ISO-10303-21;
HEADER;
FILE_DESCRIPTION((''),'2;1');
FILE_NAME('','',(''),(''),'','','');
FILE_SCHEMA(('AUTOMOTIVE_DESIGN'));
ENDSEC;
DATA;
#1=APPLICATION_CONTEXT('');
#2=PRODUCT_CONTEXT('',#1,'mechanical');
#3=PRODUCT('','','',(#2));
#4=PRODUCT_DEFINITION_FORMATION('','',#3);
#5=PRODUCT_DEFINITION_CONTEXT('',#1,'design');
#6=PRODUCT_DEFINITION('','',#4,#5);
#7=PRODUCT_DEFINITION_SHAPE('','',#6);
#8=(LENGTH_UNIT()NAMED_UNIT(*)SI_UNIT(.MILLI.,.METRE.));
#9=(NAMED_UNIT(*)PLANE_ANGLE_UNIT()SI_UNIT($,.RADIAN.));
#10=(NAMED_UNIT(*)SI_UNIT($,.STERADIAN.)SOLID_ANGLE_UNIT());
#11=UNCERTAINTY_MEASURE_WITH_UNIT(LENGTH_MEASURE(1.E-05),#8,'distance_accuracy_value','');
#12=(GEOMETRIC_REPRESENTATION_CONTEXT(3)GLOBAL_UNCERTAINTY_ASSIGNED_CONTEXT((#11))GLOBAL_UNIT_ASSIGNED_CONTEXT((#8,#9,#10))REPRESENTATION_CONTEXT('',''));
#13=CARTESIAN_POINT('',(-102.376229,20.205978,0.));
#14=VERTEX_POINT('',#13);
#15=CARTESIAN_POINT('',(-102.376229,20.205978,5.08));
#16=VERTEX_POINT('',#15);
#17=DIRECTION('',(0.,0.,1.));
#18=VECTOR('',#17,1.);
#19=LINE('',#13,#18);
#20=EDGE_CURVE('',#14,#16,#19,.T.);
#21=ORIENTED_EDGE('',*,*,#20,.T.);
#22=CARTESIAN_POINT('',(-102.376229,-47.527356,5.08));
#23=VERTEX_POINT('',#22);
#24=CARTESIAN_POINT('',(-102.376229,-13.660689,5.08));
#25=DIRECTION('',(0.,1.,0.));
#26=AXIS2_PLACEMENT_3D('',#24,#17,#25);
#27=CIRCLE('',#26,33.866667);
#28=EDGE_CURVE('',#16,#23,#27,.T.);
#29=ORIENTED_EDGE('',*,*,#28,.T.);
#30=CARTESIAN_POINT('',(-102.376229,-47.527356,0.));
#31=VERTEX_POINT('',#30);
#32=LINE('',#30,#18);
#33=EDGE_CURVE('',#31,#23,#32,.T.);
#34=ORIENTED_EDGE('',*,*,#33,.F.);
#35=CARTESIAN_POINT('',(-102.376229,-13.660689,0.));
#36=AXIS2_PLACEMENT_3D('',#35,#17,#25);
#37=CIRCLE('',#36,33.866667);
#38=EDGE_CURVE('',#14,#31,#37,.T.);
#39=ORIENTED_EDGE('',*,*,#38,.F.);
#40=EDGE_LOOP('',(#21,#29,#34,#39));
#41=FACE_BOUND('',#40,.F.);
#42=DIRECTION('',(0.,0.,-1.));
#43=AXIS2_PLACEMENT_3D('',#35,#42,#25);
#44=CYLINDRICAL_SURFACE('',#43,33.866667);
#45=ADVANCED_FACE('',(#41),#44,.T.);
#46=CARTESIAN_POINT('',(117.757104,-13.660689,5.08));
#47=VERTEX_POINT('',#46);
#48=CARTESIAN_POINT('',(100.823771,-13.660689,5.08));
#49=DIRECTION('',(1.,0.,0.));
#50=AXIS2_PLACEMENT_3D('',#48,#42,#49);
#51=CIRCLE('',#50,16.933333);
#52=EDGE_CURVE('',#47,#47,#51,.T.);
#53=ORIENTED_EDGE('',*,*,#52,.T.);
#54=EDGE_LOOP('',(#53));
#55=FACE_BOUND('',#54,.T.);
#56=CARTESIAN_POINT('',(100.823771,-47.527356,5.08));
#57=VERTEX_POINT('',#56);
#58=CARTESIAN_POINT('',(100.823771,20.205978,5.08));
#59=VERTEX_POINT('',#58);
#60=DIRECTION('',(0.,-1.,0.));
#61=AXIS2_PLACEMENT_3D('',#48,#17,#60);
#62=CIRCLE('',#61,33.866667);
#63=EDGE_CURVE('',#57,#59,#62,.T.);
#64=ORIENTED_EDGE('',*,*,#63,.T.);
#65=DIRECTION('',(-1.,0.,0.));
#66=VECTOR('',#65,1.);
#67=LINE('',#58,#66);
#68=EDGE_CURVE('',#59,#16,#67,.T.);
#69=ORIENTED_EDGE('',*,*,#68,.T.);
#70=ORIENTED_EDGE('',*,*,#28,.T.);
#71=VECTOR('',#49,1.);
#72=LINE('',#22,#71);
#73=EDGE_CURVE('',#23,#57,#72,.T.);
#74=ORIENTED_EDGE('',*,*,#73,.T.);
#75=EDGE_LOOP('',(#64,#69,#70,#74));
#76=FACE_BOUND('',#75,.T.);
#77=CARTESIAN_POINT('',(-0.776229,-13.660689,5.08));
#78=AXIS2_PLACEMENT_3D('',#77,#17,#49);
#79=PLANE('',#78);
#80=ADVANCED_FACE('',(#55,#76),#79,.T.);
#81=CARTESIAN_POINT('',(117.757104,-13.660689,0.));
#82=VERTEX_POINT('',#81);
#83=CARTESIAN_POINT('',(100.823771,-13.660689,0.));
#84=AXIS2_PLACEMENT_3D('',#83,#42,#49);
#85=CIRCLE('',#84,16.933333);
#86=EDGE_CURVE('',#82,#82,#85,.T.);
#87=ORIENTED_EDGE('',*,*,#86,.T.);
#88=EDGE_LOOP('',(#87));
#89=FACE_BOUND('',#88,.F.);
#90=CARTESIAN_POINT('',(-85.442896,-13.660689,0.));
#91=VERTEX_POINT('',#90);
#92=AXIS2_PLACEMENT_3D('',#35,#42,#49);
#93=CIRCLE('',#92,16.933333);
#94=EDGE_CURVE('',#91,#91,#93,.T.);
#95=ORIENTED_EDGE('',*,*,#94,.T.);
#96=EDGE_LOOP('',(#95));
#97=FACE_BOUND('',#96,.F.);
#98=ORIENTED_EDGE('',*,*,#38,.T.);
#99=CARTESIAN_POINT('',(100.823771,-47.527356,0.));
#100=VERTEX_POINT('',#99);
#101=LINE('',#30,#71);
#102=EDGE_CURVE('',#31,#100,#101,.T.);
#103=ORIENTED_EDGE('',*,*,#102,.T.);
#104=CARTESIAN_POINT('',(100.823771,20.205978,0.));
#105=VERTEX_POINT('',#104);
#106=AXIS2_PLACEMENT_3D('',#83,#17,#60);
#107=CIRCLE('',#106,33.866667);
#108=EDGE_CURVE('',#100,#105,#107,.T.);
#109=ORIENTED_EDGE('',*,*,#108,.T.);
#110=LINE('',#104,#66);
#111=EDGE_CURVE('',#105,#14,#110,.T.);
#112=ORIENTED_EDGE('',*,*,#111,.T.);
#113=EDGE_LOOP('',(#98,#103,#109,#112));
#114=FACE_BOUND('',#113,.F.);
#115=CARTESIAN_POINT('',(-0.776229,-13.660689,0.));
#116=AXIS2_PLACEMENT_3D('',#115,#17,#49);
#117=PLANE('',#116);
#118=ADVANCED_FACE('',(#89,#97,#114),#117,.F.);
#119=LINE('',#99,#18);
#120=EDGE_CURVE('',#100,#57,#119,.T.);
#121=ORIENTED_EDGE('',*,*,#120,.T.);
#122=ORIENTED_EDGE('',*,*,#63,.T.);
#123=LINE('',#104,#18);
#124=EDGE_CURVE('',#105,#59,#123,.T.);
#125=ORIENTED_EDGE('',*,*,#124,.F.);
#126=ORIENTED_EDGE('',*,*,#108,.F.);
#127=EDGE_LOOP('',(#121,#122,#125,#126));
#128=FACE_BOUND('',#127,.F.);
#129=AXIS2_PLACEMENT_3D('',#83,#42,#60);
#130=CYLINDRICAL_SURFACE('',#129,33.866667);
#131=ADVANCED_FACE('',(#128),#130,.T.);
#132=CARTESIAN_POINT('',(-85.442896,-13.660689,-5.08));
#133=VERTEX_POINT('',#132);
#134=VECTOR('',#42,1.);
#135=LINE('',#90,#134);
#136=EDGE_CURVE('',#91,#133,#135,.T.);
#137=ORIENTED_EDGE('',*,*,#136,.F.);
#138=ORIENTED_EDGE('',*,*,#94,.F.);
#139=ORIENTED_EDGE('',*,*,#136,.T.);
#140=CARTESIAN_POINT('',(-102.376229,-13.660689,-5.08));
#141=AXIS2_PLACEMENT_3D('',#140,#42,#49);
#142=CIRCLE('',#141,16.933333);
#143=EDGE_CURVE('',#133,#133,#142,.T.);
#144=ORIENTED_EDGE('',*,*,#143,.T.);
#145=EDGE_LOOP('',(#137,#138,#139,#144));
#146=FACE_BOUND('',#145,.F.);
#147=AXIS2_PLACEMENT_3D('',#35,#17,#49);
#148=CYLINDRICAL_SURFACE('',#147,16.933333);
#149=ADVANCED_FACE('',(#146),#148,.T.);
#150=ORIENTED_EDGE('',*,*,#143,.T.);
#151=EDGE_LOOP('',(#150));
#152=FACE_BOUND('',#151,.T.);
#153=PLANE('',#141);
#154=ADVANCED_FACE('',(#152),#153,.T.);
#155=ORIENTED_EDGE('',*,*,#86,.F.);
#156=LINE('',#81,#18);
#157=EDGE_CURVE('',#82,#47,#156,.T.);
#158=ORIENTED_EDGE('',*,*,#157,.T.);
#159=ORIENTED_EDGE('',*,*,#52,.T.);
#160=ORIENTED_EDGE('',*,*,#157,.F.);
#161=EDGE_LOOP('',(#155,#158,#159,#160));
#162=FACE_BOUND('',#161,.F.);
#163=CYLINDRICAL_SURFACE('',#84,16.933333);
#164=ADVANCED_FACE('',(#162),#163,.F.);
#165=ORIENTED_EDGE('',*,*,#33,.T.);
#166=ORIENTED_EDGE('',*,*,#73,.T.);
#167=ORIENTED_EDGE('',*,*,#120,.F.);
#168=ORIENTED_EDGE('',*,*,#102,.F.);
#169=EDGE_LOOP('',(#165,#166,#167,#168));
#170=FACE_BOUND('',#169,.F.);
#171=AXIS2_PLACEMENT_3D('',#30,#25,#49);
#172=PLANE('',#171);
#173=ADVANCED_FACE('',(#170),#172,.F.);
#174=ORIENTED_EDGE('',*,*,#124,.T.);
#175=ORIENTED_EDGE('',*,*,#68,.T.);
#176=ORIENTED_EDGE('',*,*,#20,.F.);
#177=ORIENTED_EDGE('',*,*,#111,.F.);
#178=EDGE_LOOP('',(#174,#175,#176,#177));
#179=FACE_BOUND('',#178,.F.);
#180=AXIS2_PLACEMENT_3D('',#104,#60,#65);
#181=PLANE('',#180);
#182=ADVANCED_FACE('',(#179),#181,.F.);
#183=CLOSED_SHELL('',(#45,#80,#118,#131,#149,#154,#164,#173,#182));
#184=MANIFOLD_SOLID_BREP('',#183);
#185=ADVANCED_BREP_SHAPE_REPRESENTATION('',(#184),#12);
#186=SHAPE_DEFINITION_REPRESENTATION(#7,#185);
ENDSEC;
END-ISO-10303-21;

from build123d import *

# Parameters (mm, degrees)
F2_DEPTH = 5.08
F3_R     = 16.9333333333
F4_DEPTH = 5.08
F5_DEPTH = 5.08


# Not quite as in the source:
# - a variable given as a bare number and used for a length is read in inches; the dataset says mm whatever the document's units were


with BuildPart() as f2:
    # F1 (on Top) → F2 (new body)
    with BuildSketch(Plane.XY):
        with BuildLine():
            ThreePointArc((100.8237705737, -47.527355603), (134.6904372404, -13.6606889364), (100.8237705737, 20.2059777303))
            Line((100.8237705737, 20.2059777303), (-102.3762294263, 20.2059777303))
            ThreePointArc((-102.3762294263, 20.2059777303), (-136.2428960929, -13.6606889364), (-102.3762294263, -47.527355603))
            Line((-102.3762294263, -47.527355603), (100.8237705737, -47.527355603))
        make_face()
    extrude(amount=F2_DEPTH)

    # F3 (on face) → F4 (join)
    with BuildSketch(Plane(origin=(0, 0, 0), x_dir=(1, 0, 0), z_dir=(0, 0, -1))):
        with Locations((-102.3762294263, 13.6606889364)):
            Circle(F3_R)
    extrude(amount=F4_DEPTH)

    # F3 (on face) → F5 (cut)
    with BuildSketch(Plane(origin=(0, 0, 0), x_dir=(1, 0, 0), z_dir=(0, 0, -1))):
        with Locations((100.8237705737, 13.6606889364)):
            Circle(F3_R)
    extrude(amount=-F5_DEPTH, mode=Mode.SUBTRACT)


solid = f2.part
